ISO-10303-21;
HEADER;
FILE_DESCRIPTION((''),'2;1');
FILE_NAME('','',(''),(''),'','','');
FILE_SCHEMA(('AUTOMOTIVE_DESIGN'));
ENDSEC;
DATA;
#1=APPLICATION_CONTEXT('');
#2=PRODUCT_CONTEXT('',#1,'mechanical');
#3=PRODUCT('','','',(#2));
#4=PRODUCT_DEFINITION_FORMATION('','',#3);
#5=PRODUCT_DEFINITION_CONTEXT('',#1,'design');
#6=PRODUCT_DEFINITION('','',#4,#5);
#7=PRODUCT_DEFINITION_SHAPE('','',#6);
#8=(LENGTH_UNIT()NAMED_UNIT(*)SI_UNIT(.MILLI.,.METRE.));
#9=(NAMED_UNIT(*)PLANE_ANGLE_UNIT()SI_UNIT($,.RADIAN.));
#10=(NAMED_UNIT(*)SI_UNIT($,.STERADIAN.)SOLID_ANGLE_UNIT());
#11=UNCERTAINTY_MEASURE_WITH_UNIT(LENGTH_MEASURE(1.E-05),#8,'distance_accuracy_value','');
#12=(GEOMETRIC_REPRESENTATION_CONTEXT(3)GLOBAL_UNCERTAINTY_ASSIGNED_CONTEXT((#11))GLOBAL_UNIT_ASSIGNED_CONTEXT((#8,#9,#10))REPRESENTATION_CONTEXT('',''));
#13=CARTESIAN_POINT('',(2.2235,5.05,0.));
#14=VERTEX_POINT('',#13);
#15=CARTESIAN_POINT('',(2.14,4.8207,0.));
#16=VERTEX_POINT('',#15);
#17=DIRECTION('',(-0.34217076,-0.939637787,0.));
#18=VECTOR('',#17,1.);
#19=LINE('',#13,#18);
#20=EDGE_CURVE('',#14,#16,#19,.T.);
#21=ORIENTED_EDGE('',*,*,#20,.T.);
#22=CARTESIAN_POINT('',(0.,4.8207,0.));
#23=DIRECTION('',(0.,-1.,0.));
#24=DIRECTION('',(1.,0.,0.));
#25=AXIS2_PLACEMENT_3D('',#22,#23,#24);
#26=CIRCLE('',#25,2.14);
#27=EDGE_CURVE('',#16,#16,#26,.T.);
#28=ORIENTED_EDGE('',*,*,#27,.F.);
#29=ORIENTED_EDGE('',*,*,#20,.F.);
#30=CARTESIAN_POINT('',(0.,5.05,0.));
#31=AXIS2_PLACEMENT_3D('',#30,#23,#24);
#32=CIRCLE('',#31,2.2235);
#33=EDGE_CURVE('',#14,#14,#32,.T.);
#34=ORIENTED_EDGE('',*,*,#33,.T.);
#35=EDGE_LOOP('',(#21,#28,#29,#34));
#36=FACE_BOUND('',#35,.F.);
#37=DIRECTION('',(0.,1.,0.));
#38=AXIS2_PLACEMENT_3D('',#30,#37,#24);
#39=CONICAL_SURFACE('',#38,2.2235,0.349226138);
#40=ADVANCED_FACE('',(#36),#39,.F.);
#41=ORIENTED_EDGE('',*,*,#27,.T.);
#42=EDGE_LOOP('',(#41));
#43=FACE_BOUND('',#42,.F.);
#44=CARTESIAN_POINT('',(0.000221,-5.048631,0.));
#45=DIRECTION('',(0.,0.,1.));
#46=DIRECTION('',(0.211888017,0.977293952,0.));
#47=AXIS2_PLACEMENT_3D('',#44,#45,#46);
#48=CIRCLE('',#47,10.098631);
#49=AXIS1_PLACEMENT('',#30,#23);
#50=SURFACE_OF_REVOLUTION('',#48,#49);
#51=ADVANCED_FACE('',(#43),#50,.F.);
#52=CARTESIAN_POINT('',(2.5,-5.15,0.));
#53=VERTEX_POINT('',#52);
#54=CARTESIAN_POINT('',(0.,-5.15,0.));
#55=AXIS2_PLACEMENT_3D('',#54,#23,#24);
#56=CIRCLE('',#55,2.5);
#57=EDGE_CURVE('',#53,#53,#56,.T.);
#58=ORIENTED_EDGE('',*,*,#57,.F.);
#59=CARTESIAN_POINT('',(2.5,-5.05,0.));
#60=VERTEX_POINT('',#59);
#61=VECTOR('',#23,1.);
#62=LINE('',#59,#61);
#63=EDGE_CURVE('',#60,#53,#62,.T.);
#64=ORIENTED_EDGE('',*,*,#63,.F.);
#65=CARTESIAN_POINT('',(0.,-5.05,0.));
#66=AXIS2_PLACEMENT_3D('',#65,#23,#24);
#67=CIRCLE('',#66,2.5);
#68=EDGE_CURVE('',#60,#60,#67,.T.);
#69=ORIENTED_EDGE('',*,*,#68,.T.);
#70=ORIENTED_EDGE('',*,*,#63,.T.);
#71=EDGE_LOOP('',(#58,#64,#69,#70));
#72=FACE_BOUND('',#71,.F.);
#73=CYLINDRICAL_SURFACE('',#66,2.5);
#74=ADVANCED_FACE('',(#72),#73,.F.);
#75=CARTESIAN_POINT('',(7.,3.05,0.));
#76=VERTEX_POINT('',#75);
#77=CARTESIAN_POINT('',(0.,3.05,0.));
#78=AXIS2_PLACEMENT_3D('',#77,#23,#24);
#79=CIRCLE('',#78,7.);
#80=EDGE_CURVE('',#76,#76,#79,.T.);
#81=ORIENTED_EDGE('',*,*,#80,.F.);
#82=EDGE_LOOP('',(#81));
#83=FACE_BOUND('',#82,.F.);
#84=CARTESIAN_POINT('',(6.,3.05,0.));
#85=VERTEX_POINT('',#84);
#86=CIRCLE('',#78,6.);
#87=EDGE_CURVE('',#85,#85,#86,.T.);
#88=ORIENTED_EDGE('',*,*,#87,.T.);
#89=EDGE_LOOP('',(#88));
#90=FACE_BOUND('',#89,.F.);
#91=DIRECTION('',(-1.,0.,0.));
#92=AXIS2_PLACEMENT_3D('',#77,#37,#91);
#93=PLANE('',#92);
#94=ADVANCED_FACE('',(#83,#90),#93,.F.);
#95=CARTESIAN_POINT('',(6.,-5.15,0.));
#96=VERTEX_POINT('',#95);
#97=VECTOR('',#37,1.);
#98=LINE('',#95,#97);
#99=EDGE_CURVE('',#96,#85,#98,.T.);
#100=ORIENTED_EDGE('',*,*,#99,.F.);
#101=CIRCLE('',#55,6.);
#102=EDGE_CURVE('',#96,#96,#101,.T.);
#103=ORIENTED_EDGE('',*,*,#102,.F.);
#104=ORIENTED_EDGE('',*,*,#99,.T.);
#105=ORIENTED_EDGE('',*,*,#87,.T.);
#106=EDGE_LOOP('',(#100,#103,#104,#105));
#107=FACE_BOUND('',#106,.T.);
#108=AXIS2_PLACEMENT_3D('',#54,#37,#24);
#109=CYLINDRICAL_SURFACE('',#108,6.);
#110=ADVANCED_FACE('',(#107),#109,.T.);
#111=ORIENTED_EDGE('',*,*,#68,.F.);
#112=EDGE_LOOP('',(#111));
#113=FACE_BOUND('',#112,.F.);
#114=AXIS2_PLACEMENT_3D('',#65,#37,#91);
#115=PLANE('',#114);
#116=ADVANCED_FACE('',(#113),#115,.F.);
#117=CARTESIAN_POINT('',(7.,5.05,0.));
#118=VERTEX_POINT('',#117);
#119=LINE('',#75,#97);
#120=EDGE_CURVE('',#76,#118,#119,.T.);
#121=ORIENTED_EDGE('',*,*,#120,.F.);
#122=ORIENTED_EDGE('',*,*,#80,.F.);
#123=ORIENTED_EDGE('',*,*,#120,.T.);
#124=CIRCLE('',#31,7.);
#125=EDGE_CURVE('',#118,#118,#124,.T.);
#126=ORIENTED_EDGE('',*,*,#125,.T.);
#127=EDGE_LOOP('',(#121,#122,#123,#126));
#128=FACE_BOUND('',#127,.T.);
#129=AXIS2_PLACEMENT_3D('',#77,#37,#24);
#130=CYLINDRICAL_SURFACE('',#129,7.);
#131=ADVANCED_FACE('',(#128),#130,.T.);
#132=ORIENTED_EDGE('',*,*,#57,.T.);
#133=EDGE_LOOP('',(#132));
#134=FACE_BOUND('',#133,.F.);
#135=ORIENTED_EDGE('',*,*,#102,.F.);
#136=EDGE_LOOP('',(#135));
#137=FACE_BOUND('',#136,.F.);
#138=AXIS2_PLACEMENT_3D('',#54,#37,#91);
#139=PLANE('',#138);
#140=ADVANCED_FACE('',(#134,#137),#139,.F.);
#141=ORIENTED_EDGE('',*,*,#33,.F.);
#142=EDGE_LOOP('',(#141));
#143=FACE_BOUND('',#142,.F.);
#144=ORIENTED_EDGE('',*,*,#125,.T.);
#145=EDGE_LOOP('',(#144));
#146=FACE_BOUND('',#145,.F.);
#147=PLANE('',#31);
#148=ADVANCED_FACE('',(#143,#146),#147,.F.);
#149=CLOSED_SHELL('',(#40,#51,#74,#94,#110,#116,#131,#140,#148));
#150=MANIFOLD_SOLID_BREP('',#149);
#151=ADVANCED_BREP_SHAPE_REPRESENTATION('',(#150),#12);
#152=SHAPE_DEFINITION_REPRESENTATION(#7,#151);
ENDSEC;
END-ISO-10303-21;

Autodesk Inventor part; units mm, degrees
ref_plane "YZ Plane" through (0, 0, 0) normal (1, 0, 0) x (0, 1, 0)
ref_plane "XZ Plane" through (0, 0, 0) normal (0, 1, 0) x (-1, 0, 0)
ref_plane "XY Plane" through (0, 0, 0) normal (0, 0, 1) x (1, 0, 0)
sketch "Sketch1" plane through (0, 0, 0) normal (0, 0, 1) x (1, 0, 0)
  line L0 (0, 5.05) -> (0, -5.05)
  line L1 (6, -5.15) -> (6, 3.05)
  line L2 (6, 3.05) -> (7, 3.05)
  line L3 (7, 3.05) -> (7, 5.05)
  line L4 (7, 5.05) -> (2.2235, 5.05)
  line L5 (2.2235, 5.05) -> (2.14, 4.8207)
  arc A0 (2.14, 4.8207) -> (0, 5.05) centre (0, -5.05) ccw
  line L6 (0, -12.74) -> (6, -12.74)
  line L7 (0, -5.05) -> (2.5, -5.05)
  line L8 (2.5, -5.05) -> (2.5, -5.15)
  line L9 (2.5, -5.15) -> (6, -5.15)
  point P0 (0, 0)
  point P1 (0, 0)
  dimension "d2" = 12
  dimension "d3" = 14
  dimension "d4" = 2
  dimension "d6" = 110
  dimension "d11" = 5
  dimension "d12" = 7.59
  dimension "d13" = 0.1
  dimension "d14" = 17.79
  dimension "d16" = 10.2
  dimension "d17" = 4.28
revolve "Revolution1" add sketch "Sketch1" angle 360 about axis through (0, 5.05, 0) along (0, -1, 0)
surface revolve "RevolutionSrf1" sketch "Sketch1" angle 360 about axis through (0, 5.05, 0) along (0, -1, 0) shown yes curves L6
thread "Thread1" size "M12x0.5" class "6g" standard "ANSI Metric M Profile" full length
properties part number "Lens_M12_12.0mm-f2.8" material "ABS Plastic"
